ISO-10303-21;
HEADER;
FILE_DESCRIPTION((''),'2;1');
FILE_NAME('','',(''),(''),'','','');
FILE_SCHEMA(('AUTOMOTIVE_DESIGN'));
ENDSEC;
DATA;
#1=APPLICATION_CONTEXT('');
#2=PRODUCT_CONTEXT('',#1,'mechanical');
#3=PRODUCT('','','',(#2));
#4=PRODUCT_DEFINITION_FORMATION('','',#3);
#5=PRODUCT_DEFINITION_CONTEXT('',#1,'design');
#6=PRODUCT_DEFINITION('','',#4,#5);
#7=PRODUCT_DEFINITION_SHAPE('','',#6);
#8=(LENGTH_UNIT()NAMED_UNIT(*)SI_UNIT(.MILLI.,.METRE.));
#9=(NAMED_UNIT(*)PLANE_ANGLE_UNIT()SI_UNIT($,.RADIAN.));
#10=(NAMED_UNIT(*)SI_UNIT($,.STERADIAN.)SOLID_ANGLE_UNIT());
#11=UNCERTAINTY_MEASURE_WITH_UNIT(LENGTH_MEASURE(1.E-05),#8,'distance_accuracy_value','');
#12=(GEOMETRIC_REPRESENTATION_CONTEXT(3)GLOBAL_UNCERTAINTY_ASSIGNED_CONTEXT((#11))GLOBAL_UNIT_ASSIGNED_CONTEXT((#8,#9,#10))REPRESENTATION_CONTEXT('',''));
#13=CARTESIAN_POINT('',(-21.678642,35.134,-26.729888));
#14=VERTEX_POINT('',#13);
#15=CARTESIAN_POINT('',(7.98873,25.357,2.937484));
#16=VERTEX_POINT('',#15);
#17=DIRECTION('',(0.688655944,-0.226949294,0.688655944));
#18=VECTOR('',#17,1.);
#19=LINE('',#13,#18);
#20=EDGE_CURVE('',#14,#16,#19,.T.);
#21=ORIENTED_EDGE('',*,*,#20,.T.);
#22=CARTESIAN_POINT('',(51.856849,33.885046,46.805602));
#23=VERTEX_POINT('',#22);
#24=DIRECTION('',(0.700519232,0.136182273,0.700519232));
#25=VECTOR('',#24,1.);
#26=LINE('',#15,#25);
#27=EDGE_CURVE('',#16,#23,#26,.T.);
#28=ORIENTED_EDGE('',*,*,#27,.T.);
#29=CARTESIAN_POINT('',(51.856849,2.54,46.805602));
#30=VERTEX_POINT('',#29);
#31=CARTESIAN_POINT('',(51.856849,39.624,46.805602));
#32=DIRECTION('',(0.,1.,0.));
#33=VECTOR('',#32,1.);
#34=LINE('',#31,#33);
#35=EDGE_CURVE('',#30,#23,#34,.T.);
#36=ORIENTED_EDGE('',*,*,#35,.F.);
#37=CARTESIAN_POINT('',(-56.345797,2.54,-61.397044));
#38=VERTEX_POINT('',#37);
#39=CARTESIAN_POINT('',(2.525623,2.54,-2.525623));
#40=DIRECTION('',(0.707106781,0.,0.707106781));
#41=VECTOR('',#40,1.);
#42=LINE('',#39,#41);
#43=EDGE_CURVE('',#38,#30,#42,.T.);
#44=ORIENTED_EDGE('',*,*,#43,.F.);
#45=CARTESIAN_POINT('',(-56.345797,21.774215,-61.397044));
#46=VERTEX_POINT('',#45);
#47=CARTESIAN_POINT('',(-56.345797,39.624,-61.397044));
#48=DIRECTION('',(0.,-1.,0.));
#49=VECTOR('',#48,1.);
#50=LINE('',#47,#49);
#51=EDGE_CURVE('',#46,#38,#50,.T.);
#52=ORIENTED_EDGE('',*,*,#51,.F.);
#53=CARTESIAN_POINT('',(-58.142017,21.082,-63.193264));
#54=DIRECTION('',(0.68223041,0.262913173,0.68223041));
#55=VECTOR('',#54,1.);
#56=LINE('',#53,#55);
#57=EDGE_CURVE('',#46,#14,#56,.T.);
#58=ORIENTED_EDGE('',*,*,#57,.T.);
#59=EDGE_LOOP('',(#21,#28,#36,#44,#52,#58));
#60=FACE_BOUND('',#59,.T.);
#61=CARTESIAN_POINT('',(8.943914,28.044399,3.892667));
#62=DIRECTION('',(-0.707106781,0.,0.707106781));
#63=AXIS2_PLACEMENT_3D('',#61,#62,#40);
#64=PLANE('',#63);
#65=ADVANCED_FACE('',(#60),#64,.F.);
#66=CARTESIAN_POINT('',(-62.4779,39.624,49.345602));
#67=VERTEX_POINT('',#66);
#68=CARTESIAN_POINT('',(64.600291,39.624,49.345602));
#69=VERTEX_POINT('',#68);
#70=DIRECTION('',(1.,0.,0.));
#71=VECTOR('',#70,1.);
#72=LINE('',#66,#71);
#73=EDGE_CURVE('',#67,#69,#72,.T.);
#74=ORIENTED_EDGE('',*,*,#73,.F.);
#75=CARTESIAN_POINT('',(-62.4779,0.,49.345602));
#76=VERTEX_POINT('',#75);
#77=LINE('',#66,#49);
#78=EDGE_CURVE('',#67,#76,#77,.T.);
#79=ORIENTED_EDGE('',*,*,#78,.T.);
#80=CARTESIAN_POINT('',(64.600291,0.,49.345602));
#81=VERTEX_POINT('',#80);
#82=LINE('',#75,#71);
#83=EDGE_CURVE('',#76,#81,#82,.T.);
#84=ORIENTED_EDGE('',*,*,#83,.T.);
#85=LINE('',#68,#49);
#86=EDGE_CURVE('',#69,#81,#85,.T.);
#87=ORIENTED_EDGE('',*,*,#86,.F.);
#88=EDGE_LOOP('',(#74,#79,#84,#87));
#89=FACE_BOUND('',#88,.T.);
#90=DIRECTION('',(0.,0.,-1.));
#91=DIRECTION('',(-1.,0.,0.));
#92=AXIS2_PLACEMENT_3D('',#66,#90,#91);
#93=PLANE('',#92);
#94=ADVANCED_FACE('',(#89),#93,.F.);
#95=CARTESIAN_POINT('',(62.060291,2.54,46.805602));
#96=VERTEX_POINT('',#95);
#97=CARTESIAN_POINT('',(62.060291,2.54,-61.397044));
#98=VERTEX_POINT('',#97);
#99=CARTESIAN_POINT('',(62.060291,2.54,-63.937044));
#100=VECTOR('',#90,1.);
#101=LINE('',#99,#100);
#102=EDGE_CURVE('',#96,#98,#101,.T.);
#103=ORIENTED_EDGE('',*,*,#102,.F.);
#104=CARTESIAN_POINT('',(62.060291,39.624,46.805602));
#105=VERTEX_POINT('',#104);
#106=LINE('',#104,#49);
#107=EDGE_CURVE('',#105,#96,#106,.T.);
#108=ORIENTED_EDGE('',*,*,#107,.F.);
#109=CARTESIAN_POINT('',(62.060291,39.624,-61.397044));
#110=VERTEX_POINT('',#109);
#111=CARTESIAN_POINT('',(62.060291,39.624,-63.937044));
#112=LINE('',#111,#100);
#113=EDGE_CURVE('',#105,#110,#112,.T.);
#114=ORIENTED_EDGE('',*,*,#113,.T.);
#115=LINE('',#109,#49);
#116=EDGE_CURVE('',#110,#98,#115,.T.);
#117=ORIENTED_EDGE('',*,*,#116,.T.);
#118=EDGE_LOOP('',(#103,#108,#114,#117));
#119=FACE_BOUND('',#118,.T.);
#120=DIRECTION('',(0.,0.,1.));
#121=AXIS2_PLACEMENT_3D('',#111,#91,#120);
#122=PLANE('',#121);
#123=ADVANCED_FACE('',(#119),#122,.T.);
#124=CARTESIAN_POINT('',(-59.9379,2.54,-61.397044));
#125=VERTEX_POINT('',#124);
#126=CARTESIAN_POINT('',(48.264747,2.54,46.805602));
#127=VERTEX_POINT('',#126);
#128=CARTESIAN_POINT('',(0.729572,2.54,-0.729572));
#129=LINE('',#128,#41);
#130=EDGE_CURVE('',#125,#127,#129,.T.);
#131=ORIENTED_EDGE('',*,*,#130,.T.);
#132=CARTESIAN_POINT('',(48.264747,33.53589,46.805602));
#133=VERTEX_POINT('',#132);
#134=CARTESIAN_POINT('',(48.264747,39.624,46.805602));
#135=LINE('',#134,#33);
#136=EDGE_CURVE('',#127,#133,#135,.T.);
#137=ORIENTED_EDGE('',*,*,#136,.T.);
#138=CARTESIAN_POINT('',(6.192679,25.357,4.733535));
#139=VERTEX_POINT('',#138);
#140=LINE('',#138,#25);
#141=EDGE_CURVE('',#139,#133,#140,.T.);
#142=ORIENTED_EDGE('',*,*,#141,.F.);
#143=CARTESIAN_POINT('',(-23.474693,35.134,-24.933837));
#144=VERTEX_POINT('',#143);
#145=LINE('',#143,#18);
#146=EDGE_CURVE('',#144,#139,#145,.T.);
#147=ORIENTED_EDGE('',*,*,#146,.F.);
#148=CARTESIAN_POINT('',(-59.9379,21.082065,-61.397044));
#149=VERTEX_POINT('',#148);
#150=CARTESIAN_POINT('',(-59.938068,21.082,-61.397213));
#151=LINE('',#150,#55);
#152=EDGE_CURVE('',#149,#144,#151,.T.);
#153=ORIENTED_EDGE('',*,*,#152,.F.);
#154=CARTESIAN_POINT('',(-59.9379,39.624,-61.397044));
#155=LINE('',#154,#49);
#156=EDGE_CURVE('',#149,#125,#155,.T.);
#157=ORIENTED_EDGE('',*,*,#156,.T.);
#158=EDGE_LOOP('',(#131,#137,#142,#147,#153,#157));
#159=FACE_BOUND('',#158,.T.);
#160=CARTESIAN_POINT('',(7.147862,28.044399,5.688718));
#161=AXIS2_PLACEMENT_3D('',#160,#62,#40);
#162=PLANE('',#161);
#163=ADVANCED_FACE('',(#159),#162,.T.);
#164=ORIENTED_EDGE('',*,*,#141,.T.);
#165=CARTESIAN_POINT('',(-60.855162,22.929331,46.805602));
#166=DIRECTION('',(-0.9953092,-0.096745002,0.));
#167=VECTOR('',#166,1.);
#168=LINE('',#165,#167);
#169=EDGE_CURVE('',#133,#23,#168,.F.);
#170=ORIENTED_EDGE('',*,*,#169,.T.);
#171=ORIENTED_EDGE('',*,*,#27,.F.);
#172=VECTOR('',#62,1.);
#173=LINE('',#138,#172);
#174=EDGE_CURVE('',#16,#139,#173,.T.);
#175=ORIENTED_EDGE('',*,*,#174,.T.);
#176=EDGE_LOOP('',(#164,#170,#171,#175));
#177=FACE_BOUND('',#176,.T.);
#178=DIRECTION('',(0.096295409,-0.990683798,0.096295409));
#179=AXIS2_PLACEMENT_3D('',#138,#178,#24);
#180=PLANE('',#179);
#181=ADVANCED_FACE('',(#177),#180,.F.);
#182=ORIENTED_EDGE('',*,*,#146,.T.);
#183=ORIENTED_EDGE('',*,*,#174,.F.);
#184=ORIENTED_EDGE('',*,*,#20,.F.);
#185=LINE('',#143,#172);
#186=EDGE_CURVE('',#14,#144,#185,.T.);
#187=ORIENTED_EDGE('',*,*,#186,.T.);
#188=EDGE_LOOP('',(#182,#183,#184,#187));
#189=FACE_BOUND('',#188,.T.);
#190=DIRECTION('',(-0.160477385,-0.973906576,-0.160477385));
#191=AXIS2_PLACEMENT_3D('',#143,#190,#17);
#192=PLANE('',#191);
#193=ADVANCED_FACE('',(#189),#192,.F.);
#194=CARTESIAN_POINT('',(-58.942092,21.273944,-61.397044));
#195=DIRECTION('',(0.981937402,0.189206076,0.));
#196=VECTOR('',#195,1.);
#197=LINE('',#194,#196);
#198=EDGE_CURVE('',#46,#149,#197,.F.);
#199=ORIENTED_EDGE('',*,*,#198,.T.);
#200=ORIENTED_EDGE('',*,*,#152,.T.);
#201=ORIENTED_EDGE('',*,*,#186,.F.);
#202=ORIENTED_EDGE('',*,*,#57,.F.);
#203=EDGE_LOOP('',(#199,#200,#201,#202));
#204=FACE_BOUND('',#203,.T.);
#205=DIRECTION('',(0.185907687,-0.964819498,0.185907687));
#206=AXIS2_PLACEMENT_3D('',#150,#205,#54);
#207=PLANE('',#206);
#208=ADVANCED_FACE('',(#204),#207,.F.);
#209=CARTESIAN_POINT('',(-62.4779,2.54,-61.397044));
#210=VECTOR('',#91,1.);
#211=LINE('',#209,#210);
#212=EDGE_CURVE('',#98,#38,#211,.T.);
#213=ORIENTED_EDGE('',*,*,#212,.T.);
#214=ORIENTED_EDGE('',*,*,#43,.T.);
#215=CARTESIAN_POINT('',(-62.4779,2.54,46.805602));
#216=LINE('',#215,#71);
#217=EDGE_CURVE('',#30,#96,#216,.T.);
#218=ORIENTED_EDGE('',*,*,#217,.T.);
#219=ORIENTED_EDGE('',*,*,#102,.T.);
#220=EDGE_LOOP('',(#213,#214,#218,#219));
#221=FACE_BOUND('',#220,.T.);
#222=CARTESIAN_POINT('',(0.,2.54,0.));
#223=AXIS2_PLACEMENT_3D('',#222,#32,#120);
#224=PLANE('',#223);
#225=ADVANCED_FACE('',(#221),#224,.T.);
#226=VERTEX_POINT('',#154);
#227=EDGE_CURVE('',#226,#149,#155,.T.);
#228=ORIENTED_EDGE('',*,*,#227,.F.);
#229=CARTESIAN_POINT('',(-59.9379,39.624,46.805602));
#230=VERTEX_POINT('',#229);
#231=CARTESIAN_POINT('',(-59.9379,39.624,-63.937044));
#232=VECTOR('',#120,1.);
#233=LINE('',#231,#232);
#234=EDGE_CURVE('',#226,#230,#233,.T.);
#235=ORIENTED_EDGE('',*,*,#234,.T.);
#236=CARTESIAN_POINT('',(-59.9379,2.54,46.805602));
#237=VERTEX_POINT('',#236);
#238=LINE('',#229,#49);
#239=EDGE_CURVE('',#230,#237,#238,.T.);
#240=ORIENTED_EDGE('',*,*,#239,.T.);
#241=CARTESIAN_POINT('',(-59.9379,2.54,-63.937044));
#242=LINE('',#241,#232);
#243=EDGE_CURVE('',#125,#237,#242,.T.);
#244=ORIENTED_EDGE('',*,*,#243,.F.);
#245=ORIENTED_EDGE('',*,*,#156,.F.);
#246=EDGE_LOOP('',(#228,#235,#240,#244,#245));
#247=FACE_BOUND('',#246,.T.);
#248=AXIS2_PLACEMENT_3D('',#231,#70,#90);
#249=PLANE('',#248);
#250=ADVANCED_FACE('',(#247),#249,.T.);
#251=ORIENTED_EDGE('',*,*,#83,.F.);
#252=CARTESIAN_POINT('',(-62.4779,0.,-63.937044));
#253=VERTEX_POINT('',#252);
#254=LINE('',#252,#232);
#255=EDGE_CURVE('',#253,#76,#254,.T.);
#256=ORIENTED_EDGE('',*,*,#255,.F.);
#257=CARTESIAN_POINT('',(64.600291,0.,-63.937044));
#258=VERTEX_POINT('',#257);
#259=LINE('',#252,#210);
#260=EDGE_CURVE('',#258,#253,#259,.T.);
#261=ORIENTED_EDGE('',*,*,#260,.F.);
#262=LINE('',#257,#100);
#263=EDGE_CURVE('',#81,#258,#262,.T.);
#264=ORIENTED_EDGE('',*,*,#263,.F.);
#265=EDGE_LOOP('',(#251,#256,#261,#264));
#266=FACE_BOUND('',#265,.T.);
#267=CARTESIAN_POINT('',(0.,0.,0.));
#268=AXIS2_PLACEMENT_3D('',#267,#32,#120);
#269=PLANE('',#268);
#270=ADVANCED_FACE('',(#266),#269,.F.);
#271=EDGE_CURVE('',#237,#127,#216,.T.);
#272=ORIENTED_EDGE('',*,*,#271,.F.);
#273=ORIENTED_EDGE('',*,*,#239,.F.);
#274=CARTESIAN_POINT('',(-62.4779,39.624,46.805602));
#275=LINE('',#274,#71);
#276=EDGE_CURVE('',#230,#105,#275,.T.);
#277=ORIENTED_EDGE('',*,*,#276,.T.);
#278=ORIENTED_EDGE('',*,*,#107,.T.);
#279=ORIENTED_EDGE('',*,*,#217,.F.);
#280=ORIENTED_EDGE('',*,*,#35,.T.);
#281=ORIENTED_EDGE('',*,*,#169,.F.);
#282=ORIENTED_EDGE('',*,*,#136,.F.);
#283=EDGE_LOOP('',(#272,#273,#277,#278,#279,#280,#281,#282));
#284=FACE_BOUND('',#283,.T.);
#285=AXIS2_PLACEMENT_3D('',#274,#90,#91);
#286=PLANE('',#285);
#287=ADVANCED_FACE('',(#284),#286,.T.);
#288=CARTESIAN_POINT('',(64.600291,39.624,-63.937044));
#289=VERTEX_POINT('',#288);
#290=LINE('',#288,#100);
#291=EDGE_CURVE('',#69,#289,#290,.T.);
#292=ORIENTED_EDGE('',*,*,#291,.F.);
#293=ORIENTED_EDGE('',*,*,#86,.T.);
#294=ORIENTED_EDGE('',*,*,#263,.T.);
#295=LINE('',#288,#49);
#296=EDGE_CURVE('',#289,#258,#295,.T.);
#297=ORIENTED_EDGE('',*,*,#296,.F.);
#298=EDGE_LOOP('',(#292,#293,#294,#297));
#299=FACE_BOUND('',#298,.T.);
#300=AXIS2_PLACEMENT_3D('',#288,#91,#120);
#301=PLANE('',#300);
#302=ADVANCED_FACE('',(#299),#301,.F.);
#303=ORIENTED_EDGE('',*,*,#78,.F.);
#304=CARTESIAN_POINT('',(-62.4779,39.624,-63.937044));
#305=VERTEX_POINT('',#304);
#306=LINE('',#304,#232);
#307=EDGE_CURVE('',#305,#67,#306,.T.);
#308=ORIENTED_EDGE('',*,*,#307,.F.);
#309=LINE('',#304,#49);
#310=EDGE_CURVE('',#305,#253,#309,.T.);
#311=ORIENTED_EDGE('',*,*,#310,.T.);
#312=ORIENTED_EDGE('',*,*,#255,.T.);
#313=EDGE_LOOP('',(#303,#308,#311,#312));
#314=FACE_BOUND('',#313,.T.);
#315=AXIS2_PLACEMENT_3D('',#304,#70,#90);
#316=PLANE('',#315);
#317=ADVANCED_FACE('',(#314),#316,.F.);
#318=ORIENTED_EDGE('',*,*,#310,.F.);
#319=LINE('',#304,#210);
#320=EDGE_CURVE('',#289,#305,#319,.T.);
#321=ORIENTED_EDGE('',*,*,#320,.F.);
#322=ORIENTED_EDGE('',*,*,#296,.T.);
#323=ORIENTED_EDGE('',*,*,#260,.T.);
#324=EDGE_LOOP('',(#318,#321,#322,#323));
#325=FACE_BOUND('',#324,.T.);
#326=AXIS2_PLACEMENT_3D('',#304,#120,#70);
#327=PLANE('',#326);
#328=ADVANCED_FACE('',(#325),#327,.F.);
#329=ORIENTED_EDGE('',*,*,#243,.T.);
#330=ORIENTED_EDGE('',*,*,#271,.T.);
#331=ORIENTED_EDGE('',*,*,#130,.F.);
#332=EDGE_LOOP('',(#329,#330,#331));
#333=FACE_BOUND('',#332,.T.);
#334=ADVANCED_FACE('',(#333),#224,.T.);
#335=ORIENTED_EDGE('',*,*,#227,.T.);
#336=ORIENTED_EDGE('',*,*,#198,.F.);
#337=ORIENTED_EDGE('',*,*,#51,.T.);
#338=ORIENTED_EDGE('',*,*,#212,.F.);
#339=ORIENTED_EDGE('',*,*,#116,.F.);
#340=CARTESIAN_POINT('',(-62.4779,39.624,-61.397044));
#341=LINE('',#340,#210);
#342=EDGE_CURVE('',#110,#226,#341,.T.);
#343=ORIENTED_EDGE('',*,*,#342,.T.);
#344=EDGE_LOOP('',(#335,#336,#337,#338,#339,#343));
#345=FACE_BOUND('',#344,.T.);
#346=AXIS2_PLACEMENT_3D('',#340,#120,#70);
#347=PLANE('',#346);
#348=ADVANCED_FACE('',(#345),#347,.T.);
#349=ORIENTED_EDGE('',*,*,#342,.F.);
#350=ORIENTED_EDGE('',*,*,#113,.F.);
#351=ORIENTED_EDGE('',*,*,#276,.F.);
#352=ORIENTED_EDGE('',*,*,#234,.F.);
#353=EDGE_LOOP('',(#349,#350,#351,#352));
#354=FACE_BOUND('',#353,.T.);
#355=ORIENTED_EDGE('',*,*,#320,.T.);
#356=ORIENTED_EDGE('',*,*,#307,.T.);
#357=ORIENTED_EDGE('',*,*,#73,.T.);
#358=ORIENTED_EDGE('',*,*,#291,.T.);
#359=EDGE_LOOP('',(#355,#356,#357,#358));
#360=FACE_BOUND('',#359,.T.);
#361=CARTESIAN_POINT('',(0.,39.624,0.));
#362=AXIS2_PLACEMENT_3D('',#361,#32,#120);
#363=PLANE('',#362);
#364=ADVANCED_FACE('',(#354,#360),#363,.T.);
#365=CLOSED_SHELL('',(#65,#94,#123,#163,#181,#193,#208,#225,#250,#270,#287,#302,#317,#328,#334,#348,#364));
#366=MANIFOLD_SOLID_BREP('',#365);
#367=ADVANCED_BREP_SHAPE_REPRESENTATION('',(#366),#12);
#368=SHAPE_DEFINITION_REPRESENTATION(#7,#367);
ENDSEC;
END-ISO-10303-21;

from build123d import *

# Parameters (mm, degrees)
SKETCH1_W                  = 127.078191072
SKETCH1_H                  = 113.282646321
BOSS_EXTRUDE1_DEPTH        = 39.624
SHELL_1_T                  = -2.54
OFFICIAL_RIB_BLOCK20_START = -2.54
OFFICIAL_RIB_BLOCK20_DEPTH = 2.54


with BuildPart() as part:
    # Sketch1 → Boss-Extrude1 (new body)
    with BuildSketch(Plane(origin=(0, 0, 0), x_dir=(1, 0, 0), z_dir=(0, 1, 0))):
        with Locations((1.06119575, 7.295720781)):
            Rectangle(SKETCH1_W, SKETCH1_H)
    extrude(amount=BOSS_EXTRUDE1_DEPTH)

    # 抽壳1
    shell_1_openings = [part.faces().sort_by_distance(p)[0] for p in [
        (1.06119575, 39.624, -7.295720782),
    ]]
    offset(amount=SHELL_1_T, openings=shell_1_openings, kind=Kind.INTERSECTION)

    # official_rib_block20: read off the stored shape, not the designer's step
    # official_rib_block20 outline → official_rib_block20 (add)
    with BuildSketch(Plane(origin=(0.729572078, 0, -0.729572078), x_dir=(0.7071067811865477, 0, 0.7071067811865475), z_dir=(-0.7071067811865475, 0, 0.7071067811865477)).offset(OFFICIAL_RIB_BLOCK20_START)):
        Polygon((-85.796761505, 21.08206499), (-85.796761505, 2.54), (69.764888407, 2.54), (69.764888407, 33.885045833), (7.726, 25.357), (-34.23, 35.134), align=None)
    extrude(amount=OFFICIAL_RIB_BLOCK20_DEPTH)


solid = part.part
